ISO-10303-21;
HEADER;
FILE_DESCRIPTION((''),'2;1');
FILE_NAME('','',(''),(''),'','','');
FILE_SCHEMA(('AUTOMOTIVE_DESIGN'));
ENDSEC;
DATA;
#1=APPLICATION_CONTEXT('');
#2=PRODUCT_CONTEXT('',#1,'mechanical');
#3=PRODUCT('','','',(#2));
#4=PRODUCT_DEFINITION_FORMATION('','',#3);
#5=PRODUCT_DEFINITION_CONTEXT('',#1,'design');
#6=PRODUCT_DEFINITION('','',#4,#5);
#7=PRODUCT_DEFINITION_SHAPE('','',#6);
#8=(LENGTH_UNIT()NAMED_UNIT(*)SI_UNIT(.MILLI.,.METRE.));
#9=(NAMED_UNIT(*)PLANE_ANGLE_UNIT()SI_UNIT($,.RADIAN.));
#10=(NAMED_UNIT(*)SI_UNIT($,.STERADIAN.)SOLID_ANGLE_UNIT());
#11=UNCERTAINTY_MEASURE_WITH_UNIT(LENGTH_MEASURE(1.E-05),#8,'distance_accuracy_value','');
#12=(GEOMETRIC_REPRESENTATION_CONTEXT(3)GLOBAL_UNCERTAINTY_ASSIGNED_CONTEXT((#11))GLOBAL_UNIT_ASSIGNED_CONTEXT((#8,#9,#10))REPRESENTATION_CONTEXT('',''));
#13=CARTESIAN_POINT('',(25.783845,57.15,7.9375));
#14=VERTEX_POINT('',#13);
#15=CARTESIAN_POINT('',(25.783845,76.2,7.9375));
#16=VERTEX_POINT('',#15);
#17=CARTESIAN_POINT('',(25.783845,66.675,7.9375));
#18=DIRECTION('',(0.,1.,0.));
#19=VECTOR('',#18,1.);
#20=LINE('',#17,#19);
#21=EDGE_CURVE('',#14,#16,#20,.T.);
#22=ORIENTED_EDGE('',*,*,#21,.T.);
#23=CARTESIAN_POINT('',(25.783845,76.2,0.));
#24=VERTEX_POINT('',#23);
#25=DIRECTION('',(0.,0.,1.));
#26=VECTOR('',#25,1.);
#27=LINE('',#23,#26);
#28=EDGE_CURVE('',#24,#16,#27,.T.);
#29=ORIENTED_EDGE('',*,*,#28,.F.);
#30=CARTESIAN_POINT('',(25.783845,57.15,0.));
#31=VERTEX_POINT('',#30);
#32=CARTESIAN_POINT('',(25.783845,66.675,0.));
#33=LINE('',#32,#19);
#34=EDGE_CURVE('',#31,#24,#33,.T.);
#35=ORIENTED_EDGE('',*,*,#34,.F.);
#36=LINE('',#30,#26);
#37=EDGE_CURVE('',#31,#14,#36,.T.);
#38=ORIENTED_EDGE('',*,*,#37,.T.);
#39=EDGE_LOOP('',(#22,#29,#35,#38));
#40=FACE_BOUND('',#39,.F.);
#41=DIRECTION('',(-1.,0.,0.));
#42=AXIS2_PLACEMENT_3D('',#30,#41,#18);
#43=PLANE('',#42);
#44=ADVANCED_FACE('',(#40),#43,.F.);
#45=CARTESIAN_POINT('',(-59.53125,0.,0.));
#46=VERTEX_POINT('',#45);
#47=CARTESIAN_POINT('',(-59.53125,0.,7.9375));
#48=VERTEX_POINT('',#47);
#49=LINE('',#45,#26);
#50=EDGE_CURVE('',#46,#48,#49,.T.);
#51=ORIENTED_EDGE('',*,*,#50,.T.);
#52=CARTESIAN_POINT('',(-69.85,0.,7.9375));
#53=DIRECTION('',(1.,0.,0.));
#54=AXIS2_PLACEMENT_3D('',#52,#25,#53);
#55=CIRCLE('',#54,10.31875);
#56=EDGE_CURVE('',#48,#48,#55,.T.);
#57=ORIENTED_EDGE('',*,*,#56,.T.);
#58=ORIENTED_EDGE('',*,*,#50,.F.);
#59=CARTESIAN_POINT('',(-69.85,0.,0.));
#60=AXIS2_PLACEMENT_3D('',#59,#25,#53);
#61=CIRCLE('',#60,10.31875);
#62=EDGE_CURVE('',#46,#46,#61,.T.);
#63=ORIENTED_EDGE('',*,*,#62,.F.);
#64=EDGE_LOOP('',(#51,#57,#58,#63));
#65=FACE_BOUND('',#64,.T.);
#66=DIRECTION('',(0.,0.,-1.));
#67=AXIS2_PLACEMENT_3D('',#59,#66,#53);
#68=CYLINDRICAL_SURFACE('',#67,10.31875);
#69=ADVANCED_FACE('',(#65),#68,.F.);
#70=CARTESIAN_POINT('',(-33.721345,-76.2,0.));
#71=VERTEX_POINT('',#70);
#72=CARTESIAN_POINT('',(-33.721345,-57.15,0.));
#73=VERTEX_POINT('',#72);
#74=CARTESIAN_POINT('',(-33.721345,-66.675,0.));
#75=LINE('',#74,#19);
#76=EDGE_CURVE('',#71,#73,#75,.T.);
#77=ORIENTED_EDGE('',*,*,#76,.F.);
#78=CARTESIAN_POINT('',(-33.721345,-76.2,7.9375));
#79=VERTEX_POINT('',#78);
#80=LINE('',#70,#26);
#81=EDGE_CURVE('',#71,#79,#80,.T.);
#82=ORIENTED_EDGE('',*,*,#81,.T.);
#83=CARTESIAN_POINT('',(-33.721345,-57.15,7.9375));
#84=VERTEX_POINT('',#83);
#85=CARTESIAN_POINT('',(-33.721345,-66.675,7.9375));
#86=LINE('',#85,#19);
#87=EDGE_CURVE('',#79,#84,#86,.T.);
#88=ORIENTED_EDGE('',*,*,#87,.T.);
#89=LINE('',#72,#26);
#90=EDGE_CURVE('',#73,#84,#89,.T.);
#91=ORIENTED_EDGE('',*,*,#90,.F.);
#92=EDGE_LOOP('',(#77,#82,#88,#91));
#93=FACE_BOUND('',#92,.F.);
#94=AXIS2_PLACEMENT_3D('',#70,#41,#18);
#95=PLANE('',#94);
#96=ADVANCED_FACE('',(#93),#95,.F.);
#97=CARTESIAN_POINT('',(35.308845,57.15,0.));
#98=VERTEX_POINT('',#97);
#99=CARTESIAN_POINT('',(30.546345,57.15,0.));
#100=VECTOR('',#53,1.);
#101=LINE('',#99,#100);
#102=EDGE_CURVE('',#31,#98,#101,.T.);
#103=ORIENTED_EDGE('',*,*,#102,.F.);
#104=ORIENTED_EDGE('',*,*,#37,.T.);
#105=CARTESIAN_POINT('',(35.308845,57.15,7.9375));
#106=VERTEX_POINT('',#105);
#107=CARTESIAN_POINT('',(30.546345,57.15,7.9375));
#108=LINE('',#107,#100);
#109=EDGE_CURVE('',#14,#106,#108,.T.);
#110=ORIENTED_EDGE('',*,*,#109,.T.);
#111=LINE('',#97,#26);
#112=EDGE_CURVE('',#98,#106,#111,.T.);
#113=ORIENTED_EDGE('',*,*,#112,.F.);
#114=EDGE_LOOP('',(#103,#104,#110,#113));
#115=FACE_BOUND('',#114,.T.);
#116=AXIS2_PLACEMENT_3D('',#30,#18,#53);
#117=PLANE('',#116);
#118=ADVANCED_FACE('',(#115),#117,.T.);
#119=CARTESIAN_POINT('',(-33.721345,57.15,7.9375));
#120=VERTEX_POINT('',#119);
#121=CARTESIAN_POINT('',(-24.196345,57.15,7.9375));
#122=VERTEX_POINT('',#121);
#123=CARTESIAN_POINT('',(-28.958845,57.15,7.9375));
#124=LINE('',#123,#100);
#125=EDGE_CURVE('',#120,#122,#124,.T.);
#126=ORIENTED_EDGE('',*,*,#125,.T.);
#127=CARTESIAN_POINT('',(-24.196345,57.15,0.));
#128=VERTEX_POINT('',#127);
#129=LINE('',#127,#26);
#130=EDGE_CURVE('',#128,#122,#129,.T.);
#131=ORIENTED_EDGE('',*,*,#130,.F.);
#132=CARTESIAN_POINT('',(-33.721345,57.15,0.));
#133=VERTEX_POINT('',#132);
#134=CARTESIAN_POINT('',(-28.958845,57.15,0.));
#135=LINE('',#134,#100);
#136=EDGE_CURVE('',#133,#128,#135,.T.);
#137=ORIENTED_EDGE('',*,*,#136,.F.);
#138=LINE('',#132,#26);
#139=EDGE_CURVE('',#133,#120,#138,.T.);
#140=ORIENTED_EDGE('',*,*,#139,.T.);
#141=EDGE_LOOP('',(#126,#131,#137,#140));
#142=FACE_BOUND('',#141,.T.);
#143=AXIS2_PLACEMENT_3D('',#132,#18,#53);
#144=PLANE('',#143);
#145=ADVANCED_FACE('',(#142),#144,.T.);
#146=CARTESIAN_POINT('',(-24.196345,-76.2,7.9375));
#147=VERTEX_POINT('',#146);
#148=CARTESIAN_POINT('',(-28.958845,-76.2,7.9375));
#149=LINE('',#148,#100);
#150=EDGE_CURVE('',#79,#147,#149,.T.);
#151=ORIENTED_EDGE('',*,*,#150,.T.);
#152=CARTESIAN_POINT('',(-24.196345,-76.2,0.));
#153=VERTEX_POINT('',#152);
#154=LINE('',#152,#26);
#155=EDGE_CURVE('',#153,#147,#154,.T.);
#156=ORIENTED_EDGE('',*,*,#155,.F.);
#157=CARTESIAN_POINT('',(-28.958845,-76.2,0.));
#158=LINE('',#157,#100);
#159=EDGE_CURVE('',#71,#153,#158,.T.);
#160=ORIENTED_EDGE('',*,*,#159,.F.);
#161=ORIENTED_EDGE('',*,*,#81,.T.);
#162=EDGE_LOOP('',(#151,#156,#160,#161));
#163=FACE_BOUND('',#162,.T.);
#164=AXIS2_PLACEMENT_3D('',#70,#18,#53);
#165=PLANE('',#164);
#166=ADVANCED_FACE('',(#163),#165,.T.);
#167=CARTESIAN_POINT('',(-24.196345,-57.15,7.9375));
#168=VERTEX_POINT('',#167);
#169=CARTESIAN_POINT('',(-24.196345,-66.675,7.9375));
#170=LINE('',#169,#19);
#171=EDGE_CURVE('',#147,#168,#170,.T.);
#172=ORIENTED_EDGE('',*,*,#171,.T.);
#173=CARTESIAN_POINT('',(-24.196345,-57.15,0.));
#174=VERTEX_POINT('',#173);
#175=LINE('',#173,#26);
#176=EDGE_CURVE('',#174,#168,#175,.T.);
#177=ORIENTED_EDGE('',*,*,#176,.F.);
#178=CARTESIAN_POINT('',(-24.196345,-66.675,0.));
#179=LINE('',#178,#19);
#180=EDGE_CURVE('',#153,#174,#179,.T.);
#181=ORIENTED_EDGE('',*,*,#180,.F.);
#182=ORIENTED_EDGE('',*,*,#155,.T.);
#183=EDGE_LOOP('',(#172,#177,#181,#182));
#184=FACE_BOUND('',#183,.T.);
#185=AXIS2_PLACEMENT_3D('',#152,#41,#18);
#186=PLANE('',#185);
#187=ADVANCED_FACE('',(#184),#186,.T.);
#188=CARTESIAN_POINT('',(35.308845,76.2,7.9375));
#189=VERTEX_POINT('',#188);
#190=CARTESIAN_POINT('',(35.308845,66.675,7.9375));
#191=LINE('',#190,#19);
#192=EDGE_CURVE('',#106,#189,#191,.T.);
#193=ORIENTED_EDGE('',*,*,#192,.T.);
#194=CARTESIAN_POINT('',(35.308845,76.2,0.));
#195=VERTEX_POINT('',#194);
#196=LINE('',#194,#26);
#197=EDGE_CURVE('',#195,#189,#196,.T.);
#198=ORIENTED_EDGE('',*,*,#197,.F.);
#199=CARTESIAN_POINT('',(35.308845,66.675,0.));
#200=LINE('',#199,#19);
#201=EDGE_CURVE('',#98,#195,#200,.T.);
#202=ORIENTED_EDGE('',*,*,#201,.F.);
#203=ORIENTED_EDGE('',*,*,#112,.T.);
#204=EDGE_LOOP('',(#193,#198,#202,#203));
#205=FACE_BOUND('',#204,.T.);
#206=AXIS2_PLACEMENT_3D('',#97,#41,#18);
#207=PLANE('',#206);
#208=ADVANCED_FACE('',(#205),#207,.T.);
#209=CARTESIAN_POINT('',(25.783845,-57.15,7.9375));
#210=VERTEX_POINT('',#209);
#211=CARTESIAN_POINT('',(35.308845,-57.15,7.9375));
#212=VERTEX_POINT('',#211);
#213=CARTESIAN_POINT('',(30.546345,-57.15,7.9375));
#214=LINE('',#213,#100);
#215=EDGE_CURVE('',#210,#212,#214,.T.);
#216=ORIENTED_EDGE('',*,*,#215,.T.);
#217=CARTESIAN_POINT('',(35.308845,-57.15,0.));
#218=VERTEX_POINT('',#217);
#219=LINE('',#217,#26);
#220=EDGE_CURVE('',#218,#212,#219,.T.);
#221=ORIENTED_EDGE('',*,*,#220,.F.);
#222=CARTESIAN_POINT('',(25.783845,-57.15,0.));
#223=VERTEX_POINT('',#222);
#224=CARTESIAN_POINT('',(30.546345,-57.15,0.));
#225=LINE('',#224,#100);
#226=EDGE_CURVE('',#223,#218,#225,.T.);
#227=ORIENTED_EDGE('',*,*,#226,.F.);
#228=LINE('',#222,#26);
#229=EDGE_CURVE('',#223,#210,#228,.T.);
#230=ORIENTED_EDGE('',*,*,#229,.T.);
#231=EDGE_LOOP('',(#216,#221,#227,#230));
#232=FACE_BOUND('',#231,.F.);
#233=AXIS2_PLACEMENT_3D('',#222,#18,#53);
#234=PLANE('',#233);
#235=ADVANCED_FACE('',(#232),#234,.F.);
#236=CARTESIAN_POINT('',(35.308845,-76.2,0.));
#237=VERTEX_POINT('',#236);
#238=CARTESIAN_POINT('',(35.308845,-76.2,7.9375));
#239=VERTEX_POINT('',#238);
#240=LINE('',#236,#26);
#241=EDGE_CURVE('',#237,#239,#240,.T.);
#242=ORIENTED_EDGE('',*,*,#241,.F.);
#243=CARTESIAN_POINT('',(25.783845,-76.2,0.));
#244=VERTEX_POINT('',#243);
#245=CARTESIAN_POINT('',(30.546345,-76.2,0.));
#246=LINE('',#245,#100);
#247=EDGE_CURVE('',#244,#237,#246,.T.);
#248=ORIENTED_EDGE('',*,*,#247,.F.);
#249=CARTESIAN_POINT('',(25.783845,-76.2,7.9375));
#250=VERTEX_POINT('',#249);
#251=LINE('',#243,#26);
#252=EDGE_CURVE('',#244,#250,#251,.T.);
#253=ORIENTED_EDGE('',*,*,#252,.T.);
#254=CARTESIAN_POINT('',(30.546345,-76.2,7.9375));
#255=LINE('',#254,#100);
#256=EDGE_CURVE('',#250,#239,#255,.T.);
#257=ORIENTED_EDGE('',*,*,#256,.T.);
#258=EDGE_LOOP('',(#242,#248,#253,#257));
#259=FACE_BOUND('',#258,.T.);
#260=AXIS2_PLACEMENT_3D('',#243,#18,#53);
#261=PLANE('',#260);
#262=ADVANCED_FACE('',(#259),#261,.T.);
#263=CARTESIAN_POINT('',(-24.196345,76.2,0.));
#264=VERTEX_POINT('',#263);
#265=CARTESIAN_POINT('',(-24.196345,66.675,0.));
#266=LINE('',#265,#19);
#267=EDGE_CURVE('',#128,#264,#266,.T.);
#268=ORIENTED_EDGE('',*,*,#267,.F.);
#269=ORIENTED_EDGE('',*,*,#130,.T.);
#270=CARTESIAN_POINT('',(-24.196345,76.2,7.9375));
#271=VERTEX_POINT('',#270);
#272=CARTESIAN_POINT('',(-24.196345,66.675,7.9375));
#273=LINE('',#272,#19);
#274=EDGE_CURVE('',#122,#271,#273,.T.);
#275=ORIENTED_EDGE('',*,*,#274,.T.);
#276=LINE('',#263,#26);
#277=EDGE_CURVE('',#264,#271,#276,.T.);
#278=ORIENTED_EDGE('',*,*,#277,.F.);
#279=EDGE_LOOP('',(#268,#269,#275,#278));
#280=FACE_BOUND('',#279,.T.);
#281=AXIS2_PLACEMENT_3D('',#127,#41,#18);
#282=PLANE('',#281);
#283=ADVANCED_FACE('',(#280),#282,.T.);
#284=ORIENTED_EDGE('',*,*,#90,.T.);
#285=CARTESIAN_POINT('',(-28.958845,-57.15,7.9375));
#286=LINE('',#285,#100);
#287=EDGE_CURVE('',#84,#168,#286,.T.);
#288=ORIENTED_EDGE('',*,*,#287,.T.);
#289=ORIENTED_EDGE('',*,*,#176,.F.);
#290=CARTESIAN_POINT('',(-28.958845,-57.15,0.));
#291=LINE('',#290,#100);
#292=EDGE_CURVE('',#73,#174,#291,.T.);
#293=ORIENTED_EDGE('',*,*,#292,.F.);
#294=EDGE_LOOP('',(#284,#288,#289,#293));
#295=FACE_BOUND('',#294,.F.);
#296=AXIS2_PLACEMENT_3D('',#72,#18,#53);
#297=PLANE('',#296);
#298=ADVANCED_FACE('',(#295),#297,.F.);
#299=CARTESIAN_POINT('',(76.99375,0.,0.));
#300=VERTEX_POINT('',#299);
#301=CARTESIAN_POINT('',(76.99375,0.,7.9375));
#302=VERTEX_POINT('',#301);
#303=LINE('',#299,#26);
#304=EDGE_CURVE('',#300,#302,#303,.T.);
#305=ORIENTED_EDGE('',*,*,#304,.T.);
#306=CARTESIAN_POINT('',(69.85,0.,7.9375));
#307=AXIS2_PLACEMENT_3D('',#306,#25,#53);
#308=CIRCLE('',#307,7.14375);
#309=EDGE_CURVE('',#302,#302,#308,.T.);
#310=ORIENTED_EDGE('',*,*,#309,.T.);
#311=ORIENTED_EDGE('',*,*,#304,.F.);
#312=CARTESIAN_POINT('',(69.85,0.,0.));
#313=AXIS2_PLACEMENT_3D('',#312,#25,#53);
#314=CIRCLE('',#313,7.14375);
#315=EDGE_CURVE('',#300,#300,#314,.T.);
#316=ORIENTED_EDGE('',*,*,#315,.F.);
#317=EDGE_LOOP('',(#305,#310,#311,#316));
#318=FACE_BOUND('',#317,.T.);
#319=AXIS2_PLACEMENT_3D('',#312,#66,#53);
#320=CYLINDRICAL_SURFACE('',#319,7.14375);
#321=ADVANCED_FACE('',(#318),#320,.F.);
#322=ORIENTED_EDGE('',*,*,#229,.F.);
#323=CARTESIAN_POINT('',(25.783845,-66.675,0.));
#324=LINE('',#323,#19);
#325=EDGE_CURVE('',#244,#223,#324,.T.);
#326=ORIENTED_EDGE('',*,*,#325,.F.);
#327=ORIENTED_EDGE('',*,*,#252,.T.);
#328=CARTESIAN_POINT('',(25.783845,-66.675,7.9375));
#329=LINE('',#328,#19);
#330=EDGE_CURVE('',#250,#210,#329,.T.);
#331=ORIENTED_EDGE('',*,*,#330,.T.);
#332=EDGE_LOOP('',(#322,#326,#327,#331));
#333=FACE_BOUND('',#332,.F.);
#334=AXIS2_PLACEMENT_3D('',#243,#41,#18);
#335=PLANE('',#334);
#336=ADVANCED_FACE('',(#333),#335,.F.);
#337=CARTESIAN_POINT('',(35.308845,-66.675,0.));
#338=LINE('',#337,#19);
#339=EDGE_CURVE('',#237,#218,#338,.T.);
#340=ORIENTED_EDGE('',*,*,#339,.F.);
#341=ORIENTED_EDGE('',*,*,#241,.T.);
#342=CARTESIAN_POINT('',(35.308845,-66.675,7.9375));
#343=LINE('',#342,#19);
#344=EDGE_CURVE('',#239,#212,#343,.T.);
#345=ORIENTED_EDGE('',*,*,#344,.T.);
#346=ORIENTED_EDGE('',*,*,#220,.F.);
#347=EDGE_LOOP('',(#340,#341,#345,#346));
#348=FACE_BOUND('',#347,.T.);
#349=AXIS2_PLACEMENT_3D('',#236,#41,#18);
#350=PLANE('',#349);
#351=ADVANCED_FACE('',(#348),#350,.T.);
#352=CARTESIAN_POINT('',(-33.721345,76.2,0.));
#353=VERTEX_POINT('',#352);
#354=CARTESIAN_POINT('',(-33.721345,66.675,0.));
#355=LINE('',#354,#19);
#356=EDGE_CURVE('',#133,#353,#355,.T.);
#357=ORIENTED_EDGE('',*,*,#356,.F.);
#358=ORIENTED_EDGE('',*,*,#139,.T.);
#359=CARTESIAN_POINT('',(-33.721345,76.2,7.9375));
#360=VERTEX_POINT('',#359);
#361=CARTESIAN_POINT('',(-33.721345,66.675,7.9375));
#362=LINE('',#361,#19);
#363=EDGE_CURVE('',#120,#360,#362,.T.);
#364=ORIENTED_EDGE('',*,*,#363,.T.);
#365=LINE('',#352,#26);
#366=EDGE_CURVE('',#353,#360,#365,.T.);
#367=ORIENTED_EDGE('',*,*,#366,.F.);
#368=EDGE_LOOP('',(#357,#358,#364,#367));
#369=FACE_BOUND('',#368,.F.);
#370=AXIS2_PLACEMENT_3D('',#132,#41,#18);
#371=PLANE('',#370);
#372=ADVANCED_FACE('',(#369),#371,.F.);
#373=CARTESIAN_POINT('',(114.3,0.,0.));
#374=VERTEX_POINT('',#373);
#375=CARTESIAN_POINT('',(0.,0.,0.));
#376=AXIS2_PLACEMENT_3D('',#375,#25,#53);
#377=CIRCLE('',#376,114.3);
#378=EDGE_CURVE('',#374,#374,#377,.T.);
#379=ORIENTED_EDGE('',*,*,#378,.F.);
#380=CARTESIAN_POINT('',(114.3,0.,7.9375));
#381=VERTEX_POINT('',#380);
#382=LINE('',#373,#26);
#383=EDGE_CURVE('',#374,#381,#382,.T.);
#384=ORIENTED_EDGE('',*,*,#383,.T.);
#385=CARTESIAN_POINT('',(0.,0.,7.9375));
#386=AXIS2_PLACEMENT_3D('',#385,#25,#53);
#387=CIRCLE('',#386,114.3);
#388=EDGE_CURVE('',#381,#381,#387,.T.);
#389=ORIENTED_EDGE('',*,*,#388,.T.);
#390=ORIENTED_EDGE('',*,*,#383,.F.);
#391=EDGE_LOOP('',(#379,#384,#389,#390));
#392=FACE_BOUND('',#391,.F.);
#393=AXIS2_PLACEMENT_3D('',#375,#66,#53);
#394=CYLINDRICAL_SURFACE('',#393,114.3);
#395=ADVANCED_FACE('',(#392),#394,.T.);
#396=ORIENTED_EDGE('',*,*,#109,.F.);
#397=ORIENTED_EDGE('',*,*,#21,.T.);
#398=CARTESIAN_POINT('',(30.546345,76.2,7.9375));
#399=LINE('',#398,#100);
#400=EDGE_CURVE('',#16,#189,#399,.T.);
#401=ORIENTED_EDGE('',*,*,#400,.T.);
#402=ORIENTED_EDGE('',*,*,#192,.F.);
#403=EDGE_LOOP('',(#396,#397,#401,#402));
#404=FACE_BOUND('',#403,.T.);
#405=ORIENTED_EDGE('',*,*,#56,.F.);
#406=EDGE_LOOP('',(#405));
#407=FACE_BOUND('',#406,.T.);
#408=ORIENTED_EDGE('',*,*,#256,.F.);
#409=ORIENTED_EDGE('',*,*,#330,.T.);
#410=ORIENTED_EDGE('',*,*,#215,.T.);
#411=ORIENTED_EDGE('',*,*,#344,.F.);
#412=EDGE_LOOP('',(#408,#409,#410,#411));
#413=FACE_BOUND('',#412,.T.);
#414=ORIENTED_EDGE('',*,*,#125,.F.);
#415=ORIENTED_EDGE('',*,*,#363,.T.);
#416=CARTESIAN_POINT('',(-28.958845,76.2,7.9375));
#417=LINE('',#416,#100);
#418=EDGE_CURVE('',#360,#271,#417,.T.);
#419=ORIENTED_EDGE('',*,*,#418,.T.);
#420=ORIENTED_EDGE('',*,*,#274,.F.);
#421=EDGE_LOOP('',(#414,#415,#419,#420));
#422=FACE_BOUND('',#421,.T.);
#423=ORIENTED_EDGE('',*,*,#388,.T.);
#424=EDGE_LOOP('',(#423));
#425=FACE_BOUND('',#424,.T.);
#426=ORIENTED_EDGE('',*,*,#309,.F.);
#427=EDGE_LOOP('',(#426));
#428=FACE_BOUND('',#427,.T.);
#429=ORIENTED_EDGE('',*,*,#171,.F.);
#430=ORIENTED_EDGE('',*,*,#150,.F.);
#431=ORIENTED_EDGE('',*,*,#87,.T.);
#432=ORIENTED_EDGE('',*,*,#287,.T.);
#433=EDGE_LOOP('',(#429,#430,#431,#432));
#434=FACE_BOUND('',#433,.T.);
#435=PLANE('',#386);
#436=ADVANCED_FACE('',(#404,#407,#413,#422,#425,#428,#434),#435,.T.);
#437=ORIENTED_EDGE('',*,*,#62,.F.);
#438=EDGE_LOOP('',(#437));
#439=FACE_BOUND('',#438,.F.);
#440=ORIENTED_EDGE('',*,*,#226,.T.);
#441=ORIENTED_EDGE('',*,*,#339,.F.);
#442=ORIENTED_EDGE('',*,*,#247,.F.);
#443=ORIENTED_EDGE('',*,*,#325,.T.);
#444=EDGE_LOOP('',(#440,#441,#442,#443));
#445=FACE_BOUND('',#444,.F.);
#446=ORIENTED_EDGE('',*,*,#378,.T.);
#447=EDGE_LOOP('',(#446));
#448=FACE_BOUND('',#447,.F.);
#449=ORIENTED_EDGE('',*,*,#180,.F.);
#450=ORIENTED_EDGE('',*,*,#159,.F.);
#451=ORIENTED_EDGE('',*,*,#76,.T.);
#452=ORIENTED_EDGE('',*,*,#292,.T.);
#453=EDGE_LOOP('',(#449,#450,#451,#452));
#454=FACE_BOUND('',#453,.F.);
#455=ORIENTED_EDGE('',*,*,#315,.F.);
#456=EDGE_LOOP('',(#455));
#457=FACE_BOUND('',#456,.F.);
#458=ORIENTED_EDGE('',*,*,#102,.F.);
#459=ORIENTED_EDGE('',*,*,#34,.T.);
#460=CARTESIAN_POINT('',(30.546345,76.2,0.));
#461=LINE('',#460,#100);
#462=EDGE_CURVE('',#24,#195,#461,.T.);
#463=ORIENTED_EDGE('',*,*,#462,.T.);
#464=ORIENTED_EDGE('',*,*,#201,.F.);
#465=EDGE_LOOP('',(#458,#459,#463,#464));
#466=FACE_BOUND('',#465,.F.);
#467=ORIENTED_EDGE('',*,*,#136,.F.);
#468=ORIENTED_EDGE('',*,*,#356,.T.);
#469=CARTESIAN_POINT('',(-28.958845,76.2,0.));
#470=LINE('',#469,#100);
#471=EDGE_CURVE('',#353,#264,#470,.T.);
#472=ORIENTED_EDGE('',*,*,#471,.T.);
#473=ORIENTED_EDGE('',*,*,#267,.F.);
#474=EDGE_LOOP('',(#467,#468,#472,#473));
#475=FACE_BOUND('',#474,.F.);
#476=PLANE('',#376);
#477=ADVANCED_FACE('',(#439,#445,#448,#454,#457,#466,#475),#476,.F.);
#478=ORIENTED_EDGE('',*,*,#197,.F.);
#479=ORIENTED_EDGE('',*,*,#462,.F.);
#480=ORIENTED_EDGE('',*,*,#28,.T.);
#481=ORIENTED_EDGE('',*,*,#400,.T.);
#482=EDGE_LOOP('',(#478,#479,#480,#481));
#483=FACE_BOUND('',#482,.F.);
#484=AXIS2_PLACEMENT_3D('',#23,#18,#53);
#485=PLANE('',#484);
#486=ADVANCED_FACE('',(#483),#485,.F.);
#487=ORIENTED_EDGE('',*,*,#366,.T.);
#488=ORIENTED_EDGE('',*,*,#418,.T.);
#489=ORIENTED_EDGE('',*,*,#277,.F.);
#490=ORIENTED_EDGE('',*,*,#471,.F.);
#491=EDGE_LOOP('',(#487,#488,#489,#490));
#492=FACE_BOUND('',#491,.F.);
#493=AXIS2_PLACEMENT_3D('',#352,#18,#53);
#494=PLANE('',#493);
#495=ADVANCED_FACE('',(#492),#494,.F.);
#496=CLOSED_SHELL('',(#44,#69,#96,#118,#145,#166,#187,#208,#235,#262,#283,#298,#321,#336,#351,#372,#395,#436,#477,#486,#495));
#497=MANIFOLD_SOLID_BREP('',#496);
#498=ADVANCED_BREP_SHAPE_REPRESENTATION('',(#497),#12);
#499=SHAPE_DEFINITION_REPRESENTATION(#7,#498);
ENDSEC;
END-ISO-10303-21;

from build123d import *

# Parameters (mm, degrees)
F0_R     = 114.3
F0_W     = 9.525
F0_H     = 19.05
F0_R_2   = 10.31875
F0_R_3   = 7.14375
F1_DEPTH = 7.9375


# Not quite as in the source:
# - a length typed as a fraction of an inch, garbled in the dataset ("3 / 203.2 mm" for 3/8 in), is restored


with BuildPart() as f1:
    # F0 (on Top) → F1 (new body)
    with BuildSketch(Plane.XY):
        Circle(F0_R)
        with Locations((-28.9588448, -66.675)):
            Rectangle(F0_W, F0_H, mode=Mode.SUBTRACT)
        with Locations((30.5463448, -66.675)):
            Rectangle(F0_W, F0_H, mode=Mode.SUBTRACT)
        with Locations((-69.85, 0)):
            Circle(F0_R_2, mode=Mode.SUBTRACT)
        with Locations((-28.9588448, 66.675)):
            Rectangle(F0_W, F0_H, mode=Mode.SUBTRACT)
        with Locations((69.85, 0)):
            Circle(F0_R_3, mode=Mode.SUBTRACT)
        with Locations((30.5463448, 66.675)):
            Rectangle(F0_W, F0_H, mode=Mode.SUBTRACT)
    extrude(amount=F1_DEPTH)


solid = f1.part
